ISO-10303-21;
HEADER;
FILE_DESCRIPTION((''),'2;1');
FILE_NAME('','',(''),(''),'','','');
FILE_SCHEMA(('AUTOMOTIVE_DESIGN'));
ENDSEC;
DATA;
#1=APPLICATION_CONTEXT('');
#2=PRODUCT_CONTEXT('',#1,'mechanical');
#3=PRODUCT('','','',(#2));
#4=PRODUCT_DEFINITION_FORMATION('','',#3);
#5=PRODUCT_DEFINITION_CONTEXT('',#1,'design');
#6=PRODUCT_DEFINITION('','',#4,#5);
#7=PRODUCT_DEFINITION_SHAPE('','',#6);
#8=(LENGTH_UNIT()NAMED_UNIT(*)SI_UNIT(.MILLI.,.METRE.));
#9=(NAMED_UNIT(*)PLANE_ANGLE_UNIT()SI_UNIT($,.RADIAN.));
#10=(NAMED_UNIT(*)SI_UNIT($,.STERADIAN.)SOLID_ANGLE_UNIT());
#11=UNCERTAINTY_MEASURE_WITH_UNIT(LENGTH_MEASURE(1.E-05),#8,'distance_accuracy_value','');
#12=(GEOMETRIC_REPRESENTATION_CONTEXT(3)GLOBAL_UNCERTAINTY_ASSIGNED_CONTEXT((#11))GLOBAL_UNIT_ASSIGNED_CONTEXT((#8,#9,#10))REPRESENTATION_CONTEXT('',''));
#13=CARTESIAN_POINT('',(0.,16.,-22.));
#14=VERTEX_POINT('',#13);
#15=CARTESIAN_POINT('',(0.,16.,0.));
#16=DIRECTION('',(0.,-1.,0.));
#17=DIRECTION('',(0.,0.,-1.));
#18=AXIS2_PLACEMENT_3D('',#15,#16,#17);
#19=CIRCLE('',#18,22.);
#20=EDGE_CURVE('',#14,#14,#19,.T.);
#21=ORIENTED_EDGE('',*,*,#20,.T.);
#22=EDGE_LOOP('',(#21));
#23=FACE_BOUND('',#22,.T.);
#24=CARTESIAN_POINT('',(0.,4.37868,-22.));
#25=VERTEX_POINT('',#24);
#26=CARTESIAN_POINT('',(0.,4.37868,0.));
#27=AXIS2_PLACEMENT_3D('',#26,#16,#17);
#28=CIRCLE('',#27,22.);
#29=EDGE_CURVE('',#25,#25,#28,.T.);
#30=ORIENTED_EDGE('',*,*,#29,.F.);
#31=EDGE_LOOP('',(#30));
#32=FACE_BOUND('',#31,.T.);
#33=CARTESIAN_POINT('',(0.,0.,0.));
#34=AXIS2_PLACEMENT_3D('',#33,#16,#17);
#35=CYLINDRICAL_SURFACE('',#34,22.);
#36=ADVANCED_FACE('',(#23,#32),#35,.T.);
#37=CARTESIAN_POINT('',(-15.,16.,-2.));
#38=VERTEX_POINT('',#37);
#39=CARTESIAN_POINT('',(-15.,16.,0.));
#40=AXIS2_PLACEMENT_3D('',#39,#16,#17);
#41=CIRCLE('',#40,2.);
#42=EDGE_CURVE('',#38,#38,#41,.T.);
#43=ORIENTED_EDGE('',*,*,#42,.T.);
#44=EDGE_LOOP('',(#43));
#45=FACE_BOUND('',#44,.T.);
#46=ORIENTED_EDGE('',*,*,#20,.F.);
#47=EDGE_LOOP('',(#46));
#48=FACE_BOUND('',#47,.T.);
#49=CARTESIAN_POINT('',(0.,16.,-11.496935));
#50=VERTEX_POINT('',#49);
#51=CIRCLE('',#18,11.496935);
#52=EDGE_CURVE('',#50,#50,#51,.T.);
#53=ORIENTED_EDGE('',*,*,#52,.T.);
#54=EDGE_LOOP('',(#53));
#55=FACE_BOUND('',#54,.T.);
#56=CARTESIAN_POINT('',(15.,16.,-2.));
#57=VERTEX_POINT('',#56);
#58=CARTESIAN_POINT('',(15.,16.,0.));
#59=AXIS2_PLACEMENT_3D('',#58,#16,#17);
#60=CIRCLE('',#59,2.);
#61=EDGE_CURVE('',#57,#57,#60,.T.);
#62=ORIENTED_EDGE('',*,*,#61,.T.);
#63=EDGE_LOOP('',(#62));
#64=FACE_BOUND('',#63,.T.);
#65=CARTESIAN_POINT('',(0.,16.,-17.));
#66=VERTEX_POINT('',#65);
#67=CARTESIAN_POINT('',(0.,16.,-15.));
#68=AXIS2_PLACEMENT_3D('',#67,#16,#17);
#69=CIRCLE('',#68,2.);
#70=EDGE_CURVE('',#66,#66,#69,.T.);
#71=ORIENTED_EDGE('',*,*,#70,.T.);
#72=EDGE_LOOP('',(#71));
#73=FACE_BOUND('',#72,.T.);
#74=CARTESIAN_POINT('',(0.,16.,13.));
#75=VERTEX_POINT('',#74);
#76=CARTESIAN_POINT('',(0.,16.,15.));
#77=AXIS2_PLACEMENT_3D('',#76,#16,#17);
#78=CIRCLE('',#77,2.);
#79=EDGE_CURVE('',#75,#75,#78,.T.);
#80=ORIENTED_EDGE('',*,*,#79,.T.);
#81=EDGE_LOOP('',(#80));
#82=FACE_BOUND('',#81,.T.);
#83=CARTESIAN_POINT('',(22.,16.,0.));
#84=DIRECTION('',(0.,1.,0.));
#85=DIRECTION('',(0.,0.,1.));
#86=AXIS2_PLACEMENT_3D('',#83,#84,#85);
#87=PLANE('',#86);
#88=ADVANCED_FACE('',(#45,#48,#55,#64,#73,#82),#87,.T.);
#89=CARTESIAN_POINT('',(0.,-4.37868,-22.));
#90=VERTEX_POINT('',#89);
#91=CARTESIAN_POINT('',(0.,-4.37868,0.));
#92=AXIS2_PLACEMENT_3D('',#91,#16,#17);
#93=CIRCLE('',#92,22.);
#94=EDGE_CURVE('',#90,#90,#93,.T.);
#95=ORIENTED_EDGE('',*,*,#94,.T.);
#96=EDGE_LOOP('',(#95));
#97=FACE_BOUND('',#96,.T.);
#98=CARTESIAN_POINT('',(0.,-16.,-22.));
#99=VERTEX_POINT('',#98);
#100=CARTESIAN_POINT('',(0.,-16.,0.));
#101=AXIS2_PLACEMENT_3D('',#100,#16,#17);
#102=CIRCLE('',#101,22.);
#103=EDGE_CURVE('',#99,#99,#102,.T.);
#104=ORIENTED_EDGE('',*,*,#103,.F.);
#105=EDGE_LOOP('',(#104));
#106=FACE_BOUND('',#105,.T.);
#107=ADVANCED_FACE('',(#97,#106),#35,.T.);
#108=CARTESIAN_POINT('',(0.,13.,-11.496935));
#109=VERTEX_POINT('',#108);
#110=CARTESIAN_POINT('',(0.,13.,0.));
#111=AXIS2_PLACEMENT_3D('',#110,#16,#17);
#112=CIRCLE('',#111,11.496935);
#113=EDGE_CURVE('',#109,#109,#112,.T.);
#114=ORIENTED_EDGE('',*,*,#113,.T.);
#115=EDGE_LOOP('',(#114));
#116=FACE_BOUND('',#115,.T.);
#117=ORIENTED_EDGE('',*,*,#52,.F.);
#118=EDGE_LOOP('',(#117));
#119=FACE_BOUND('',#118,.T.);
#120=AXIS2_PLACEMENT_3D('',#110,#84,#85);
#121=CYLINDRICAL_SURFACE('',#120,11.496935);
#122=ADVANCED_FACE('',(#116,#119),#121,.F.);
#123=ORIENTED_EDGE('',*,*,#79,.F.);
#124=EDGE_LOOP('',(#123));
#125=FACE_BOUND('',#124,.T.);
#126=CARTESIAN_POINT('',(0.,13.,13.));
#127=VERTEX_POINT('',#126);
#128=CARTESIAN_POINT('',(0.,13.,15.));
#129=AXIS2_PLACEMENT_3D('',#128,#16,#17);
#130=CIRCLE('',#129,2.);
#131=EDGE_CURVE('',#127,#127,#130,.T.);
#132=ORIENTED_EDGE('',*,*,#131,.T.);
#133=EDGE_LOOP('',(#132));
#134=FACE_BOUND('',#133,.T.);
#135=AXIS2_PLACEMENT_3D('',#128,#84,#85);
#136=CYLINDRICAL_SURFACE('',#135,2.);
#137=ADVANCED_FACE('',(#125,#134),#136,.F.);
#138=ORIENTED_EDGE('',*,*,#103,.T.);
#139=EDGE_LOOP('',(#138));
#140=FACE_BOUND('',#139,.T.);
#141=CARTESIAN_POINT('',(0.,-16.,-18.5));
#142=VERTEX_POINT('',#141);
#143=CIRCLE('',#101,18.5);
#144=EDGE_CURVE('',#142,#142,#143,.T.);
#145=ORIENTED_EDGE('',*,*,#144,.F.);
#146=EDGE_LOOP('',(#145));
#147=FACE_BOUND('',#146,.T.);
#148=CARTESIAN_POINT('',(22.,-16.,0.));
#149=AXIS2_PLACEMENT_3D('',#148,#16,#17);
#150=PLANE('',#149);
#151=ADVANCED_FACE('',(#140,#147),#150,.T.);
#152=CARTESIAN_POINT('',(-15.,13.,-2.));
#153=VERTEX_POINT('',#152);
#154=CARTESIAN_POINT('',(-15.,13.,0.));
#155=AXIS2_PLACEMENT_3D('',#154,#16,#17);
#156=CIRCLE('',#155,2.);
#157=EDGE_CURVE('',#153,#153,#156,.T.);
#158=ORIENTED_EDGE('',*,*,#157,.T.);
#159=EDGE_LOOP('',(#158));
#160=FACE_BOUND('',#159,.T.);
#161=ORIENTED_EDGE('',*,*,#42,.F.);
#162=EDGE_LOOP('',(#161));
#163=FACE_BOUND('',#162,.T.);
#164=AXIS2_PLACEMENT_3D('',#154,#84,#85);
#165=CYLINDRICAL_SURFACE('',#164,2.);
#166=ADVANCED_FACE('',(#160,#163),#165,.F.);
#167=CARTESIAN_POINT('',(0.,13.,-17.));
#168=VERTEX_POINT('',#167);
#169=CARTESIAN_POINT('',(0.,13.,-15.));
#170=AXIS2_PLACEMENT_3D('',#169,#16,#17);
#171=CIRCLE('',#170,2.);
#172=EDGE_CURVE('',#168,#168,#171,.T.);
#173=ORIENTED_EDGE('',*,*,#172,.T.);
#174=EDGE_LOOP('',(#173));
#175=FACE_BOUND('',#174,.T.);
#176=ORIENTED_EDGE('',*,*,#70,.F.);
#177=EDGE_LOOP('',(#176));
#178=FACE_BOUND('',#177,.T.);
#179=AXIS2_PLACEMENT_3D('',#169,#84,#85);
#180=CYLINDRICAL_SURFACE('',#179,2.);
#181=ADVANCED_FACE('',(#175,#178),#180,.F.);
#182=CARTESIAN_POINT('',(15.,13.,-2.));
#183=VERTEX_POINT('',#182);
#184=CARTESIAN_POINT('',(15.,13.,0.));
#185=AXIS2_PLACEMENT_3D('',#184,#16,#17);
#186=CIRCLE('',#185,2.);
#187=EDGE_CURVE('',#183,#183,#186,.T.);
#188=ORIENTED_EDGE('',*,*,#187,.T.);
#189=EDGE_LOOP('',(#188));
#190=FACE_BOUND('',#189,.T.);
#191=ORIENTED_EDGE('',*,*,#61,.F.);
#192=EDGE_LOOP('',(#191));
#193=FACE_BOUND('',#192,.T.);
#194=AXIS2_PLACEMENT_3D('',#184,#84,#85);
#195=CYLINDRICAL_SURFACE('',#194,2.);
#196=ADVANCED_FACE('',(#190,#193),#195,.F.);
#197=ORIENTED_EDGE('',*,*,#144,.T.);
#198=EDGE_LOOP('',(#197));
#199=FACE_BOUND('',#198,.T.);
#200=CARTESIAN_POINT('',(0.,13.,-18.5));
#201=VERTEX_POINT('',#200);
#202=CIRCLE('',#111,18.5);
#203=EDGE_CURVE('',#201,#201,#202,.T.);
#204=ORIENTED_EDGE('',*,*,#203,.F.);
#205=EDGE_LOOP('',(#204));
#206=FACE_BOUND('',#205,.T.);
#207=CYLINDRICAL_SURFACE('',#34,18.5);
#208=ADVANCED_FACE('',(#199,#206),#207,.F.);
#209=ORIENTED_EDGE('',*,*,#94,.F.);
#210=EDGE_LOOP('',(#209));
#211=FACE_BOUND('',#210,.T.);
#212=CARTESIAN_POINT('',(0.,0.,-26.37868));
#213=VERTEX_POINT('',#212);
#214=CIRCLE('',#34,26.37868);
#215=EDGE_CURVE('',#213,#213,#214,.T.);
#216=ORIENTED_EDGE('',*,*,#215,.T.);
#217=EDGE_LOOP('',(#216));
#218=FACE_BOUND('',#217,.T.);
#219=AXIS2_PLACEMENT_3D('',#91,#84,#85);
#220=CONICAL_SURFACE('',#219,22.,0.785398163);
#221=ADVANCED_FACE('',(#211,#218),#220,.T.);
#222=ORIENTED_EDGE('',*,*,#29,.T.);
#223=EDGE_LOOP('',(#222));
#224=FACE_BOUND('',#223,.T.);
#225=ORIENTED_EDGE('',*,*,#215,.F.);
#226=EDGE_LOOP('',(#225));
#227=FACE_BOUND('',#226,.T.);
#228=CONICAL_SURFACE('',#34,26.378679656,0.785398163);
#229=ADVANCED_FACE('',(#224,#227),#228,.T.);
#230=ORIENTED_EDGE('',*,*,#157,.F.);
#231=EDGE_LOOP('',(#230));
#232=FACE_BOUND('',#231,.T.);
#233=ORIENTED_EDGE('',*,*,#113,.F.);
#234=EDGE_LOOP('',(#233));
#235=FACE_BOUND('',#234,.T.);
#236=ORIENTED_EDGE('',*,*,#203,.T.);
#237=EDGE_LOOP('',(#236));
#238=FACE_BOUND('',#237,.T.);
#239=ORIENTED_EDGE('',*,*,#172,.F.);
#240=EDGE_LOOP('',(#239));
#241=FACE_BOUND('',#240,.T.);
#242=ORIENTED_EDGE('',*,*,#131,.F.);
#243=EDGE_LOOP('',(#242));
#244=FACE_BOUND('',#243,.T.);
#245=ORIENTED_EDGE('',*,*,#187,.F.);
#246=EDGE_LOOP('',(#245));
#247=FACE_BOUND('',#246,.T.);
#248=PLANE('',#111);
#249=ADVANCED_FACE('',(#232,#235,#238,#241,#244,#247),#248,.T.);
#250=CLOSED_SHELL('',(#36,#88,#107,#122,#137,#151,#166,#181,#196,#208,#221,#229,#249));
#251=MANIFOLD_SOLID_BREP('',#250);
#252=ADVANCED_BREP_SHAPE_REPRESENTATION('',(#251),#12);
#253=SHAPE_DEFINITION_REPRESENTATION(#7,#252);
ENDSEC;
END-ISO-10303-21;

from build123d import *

# Parameters (mm, degrees)
BOSS_EXTRUDE2_START = 3
SKETCH3_R           = 18.5
SKETCH3_R_2         = 2
SKETCH3_R_3         = 11.496935192
BOSS_EXTRUDE2_DEPTH = 3


# Read off the part's stored shape, not the designer's step: Revolve1
with BuildPart() as part:
    # Revolve1 outline → Revolve1 (revolve)
    with BuildSketch(Plane.XY):
        Polygon((26.378679656, 0), (22, 4.378679656), (22, 16), (18.5, 16), (18.5, -16), (22, -16), (22, -4.378679656), align=None)
    revolve(axis=Axis((0, 0, 0), (0, 1, 0)))

    # Sketch3 → Boss-Extrude2 (add)
    with BuildSketch(Plane.XZ.offset(-16).offset(BOSS_EXTRUDE2_START)):
        with Locations(Location((0, 0, 0), (0, 0, 270))):
            Circle(SKETCH3_R)
        with Locations(Location((15, 0, 0), (0, 0, 270))):
            Circle(SKETCH3_R_2, mode=Mode.SUBTRACT)
        with Locations(Location((0, 0, 0), (0, 0, 270))):
            Circle(SKETCH3_R_3, mode=Mode.SUBTRACT)
        with Locations(Location((0, -15, 0), (0, 0, 270))):
            Circle(SKETCH3_R_2, mode=Mode.SUBTRACT)
        with Locations(Location((-15, 0, 0), (0, 0, 270))):
            Circle(SKETCH3_R_2, mode=Mode.SUBTRACT)
        with Locations(Location((0, 15, 0), (0, 0, 270))):
            Circle(SKETCH3_R_2, mode=Mode.SUBTRACT)
    extrude(amount=-BOSS_EXTRUDE2_DEPTH)


solid = part.part
